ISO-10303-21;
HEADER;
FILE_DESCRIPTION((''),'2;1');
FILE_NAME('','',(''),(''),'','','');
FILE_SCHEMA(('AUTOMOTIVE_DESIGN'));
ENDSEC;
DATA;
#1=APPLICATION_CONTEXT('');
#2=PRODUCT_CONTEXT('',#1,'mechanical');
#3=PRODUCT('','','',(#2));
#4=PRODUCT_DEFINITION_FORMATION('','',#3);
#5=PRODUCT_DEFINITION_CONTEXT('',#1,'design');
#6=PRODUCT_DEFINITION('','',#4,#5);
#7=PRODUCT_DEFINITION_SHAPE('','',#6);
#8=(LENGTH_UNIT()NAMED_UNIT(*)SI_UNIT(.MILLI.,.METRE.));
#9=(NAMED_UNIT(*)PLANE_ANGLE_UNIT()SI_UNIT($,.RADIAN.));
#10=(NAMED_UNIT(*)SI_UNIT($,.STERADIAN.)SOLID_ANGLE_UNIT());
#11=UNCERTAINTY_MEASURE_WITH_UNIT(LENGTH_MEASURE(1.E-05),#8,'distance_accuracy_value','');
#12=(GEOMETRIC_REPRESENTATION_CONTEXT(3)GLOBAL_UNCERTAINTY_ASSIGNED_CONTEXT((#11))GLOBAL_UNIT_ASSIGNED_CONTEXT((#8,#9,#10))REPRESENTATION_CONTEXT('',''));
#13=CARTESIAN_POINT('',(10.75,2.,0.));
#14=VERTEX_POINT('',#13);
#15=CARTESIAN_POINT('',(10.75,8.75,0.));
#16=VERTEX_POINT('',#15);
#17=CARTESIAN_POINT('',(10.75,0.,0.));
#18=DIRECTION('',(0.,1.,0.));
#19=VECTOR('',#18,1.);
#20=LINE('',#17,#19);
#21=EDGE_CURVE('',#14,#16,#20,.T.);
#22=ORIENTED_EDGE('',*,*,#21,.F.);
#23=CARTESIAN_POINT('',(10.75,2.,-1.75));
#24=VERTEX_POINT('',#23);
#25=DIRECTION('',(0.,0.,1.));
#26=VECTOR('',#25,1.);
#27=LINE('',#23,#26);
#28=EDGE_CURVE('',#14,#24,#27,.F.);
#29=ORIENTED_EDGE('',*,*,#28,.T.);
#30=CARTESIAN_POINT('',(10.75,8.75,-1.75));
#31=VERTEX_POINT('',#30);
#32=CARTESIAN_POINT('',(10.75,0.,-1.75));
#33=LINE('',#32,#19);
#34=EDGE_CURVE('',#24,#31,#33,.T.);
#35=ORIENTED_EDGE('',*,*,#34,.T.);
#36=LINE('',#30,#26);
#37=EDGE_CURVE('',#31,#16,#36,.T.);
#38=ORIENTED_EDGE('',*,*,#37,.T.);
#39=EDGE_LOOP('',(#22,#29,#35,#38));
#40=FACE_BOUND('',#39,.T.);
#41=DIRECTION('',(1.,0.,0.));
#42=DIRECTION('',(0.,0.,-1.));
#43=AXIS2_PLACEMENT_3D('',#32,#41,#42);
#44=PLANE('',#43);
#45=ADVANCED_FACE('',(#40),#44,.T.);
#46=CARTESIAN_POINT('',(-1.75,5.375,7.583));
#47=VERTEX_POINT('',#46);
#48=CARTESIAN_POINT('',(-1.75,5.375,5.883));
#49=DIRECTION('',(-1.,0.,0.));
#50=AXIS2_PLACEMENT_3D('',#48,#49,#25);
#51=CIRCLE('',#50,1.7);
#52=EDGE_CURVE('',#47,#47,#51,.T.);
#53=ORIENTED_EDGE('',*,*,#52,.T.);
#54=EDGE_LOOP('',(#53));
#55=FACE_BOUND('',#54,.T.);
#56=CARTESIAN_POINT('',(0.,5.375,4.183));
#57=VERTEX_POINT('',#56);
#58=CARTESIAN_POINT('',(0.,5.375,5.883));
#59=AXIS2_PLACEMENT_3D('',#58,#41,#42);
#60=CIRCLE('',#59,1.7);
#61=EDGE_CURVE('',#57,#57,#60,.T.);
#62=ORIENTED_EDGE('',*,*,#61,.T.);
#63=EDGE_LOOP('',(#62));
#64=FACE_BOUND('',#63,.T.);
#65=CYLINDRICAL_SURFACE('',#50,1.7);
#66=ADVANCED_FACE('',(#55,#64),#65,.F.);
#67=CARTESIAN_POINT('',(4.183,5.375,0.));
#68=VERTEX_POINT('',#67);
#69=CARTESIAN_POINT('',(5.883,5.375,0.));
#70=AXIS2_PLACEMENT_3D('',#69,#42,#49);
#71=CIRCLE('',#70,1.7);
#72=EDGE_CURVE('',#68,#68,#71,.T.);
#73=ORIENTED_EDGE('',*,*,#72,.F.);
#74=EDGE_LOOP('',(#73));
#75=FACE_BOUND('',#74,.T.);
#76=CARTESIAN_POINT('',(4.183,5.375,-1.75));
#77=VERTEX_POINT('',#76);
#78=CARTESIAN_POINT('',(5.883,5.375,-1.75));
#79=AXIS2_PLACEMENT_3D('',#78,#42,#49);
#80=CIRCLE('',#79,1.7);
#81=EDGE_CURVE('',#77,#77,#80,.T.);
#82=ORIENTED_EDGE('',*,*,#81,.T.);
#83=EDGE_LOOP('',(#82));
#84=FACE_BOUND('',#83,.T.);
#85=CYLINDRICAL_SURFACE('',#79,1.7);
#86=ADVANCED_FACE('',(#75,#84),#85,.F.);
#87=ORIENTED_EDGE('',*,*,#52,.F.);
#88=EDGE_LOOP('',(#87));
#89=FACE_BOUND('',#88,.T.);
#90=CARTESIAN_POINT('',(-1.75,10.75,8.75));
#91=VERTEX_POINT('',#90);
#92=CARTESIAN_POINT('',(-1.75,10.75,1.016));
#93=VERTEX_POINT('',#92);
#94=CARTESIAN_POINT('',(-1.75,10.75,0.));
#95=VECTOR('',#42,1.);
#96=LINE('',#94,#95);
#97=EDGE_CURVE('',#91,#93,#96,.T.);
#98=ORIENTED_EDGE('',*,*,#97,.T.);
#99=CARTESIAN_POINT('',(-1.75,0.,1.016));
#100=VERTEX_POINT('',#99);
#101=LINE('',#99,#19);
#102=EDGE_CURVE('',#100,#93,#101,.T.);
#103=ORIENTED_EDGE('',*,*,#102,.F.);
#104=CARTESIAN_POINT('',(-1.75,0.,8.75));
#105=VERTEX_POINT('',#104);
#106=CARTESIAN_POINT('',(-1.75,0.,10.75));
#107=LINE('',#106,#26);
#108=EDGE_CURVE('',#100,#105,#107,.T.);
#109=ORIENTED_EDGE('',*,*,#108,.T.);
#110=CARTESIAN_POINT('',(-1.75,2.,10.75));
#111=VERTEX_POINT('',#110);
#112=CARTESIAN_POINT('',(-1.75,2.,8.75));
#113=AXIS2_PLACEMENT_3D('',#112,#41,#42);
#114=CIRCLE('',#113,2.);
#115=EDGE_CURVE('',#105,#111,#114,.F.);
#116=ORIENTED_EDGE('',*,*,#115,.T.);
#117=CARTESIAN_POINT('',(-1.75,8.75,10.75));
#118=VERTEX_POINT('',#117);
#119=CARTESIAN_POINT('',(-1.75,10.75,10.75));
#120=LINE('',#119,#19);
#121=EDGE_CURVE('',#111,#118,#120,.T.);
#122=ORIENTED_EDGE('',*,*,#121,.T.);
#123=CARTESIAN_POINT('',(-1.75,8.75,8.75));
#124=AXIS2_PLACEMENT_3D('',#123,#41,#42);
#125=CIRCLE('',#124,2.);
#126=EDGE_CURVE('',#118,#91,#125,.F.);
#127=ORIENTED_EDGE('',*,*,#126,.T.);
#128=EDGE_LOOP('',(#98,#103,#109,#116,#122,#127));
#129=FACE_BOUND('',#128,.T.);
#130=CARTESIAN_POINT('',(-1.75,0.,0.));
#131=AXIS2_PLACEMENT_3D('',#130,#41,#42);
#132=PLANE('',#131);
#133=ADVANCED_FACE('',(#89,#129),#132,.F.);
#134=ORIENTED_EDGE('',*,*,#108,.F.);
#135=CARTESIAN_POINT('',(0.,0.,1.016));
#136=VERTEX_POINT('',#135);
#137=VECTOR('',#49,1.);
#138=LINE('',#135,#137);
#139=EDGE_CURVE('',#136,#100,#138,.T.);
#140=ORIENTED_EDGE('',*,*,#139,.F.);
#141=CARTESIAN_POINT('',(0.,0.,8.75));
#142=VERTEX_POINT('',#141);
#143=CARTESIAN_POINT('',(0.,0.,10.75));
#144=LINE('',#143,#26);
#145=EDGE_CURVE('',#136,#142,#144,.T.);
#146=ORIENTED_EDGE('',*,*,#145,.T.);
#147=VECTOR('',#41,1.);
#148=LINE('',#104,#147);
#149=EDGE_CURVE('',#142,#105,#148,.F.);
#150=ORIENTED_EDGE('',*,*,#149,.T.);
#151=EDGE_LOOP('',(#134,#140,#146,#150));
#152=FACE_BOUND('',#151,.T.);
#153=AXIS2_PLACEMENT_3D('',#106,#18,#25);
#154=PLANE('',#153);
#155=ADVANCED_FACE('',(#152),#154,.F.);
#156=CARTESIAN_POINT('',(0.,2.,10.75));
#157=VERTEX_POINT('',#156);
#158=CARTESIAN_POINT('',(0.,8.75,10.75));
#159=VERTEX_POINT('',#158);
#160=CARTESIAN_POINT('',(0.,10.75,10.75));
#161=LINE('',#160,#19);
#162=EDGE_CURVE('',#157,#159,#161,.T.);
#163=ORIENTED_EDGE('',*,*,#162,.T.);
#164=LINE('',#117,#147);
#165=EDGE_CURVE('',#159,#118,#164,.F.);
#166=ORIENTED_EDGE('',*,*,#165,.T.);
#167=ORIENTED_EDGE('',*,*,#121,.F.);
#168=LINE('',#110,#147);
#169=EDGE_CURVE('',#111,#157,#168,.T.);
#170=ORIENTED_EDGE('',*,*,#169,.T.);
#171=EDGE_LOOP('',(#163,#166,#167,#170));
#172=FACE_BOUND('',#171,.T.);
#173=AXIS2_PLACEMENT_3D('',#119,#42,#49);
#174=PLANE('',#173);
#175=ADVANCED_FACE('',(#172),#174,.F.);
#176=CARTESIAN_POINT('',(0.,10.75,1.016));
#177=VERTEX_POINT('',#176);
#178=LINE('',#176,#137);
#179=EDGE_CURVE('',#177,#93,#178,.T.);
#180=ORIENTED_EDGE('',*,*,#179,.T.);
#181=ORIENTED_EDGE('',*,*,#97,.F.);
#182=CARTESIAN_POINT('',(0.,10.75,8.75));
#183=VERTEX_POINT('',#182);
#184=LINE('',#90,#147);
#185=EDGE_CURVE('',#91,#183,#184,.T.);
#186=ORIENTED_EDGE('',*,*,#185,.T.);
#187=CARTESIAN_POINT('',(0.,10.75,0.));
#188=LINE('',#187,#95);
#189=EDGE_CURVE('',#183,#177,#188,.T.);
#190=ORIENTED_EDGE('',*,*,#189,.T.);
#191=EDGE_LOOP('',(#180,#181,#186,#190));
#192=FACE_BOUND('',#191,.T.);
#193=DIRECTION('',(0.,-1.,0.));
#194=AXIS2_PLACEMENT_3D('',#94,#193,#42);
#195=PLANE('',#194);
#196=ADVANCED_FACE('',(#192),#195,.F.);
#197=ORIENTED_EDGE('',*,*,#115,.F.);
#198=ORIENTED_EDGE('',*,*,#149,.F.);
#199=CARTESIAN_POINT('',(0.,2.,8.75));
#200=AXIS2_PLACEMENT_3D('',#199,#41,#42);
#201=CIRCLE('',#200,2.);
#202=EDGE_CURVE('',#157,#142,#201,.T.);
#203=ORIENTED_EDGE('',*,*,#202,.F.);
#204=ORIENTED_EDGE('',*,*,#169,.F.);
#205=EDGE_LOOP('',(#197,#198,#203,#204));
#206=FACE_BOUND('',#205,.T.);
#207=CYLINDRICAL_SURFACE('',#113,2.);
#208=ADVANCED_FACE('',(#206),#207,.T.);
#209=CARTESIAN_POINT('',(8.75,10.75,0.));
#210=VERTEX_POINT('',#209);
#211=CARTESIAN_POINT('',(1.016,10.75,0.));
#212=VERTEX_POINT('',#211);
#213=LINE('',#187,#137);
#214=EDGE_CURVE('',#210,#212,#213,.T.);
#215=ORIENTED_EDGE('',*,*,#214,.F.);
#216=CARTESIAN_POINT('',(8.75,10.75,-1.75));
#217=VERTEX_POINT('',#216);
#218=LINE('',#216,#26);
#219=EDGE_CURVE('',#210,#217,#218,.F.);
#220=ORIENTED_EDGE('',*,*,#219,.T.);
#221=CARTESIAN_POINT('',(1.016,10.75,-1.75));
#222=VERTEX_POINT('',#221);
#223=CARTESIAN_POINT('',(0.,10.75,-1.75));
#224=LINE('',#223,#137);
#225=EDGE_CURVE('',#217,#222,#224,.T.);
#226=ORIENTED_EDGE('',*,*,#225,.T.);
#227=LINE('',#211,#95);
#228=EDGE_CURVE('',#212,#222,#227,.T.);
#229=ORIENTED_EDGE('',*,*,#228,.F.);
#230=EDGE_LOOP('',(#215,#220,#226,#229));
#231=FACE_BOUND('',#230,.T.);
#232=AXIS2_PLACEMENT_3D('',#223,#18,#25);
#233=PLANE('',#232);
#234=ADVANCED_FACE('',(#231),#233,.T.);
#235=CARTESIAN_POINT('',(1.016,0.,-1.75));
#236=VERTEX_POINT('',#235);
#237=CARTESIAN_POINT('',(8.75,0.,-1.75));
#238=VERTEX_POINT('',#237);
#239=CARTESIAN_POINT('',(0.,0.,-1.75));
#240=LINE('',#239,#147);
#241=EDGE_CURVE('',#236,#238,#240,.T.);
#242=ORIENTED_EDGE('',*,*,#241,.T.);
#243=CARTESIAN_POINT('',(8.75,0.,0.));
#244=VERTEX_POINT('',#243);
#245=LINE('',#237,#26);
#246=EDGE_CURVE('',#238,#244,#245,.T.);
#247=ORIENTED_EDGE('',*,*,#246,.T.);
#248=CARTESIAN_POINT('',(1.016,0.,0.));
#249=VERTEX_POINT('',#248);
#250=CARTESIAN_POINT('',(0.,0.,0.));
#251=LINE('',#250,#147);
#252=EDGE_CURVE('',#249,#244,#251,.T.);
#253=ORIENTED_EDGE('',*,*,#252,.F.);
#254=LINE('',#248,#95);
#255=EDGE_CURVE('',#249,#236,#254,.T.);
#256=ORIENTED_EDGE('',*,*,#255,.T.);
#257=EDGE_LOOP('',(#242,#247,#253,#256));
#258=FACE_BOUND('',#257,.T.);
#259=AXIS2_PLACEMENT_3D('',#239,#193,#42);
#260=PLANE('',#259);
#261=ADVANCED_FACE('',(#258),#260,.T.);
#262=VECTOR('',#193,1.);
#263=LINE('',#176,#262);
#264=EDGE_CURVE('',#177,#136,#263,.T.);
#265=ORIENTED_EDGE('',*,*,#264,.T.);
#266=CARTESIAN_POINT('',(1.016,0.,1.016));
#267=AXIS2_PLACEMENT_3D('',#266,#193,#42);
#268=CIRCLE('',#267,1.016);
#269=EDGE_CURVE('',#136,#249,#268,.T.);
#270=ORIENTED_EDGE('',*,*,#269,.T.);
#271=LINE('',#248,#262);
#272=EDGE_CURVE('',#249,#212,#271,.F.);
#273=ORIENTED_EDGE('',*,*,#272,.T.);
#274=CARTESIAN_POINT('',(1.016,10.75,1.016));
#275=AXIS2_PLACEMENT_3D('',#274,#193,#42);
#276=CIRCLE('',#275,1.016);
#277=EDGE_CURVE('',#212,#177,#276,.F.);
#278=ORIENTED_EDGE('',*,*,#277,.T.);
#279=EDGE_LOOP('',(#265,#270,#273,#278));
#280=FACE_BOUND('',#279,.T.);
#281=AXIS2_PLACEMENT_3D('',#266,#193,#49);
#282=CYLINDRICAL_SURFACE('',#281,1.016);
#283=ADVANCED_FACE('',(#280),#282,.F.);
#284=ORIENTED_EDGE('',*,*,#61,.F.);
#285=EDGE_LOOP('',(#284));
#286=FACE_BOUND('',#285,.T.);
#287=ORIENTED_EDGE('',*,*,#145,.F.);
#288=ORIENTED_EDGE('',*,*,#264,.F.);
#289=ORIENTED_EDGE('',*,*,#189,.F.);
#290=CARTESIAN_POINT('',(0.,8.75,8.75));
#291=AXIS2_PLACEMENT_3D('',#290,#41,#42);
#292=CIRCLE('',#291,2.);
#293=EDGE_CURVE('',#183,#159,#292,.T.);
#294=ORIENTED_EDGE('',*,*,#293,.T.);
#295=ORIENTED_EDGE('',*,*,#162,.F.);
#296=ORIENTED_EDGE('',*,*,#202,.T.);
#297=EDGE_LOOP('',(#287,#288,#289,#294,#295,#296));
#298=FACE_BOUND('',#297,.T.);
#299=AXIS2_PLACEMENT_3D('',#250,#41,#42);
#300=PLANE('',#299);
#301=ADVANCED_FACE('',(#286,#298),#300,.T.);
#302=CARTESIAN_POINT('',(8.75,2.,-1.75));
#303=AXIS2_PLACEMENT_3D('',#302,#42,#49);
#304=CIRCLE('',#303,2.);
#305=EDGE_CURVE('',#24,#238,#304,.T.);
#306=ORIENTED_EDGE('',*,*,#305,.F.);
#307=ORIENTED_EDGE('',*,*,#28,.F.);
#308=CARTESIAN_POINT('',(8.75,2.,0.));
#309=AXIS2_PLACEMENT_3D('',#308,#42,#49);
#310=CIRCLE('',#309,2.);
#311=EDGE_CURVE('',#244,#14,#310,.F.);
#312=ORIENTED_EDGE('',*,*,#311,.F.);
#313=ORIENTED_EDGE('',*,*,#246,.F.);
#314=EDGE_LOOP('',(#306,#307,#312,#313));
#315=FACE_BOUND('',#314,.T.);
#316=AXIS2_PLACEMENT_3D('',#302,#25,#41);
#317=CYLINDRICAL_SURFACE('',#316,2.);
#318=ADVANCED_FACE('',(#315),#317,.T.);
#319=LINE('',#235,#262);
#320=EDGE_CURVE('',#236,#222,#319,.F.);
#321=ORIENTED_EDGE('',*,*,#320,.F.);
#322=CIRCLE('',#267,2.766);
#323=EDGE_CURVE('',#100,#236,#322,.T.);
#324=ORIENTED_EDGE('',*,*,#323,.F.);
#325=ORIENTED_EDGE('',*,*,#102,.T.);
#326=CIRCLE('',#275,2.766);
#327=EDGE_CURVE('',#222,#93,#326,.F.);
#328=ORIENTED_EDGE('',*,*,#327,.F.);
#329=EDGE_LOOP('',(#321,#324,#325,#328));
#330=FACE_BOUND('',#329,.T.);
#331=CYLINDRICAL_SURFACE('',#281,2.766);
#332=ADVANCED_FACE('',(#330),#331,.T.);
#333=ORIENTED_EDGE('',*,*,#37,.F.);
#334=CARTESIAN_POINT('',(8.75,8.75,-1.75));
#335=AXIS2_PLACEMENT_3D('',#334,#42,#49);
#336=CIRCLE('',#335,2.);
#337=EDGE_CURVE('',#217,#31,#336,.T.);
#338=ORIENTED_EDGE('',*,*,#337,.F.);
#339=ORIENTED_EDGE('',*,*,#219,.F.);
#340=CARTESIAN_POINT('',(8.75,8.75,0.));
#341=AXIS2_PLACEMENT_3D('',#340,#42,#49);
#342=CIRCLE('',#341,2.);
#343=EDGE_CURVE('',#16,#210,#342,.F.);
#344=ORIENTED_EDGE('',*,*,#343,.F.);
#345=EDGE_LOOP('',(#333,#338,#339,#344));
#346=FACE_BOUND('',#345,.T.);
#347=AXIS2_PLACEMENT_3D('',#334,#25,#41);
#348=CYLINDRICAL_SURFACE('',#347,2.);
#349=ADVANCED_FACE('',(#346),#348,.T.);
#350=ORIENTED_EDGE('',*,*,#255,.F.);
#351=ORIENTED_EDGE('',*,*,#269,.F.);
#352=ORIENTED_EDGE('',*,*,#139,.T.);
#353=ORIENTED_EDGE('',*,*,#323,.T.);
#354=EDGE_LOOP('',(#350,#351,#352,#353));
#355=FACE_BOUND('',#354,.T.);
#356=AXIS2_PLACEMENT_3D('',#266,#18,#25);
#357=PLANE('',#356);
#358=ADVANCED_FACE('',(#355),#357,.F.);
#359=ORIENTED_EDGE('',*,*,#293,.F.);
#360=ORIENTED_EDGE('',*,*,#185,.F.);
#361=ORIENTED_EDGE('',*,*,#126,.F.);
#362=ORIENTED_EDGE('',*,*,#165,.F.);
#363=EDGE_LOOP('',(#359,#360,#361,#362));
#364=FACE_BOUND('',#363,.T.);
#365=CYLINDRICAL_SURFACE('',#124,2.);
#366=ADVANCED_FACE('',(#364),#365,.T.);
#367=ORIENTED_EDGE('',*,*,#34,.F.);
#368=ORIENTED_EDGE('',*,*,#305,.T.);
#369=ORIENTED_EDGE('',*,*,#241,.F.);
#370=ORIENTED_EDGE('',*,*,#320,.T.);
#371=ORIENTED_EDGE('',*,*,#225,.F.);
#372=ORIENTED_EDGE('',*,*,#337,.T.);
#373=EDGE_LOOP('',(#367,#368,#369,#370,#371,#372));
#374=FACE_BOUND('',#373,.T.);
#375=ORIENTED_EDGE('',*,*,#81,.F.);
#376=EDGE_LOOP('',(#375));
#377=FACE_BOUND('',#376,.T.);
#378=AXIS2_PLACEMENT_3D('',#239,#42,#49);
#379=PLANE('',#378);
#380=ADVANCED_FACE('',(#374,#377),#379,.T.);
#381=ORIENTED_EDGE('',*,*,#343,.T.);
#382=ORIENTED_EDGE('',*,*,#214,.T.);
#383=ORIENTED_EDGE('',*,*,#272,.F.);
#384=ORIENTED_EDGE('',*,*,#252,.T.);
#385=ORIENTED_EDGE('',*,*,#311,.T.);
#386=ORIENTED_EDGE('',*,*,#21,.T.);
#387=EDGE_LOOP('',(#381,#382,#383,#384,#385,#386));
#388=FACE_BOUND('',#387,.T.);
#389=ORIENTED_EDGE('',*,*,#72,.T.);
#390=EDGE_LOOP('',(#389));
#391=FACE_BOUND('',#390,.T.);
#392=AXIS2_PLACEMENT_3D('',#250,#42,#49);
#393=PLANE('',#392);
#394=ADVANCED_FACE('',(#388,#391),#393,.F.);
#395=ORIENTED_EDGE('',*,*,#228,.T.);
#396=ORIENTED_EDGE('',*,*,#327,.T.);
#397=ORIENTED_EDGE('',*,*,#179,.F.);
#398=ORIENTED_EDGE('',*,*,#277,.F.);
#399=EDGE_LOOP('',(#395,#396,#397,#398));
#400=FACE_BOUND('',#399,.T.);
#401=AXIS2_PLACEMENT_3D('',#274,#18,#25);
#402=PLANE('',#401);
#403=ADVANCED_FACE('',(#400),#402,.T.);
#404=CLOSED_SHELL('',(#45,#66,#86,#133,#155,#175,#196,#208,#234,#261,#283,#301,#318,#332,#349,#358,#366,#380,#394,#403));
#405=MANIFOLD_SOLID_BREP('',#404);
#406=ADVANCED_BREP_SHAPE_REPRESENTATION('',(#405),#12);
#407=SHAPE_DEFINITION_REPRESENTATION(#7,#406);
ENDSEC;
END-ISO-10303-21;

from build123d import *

# Parameters (mm, degrees)
SKETCH1_W                      = 10.75
SKETCH1_H                      = 10.75
BASE_FLANGE1_DEPTH             = 1.75
EDGE_FLANGE1_STRIP_W           = 9.032
EDGE_FLANGE1_STRIP_H           = 1.75
EDGE_FLANGE1_STRIP_CUT_DEPTH   = 10.75
EDGE_FLANGE1_DEPTH             = 10.75
M3_CLEARANCE_HOLE1_D           = 3.4
M3_CLEARANCE_HOLE1_ON_FACE_2_D = 3.4
FILLET1_R                      = 2


# Sheet-metal steps are written as plain solids
with BuildPart() as part:
    # Sketch1 → Base-Flange1 (new body)
    with BuildSketch(Plane.XY):
        with Locations((5.375, 5.375)):
            Rectangle(SKETCH1_W, SKETCH1_H)
    extrude(amount=-BASE_FLANGE1_DEPTH)

    # Edge-Flange1 strip (across the edge) → Edge-Flange1 strip cut (cut)
    with BuildSketch(Plane.XZ.offset(-10.75)):
        with Locations((-3.5, -0.875)):
            Rectangle(EDGE_FLANGE1_STRIP_W, EDGE_FLANGE1_STRIP_H)
    extrude(amount=EDGE_FLANGE1_STRIP_CUT_DEPTH, mode=Mode.SUBTRACT)

    # Edge-Flange1 section (across the edge) → Edge-Flange1 (add)
    with BuildSketch(Plane.XZ.offset(-10.75)):
        with BuildLine():
            Line((-1.75, 1.016), (-1.75, 10.75))
            Line((-1.75, 10.75), (0, 10.75))
            Line((0, 10.75), (0, 1.016))
            ThreePointArc((0, 1.016), (0.29757951, 0.29757951), (1.016, 0))
            Line((1.016, 0), (1.016, -1.75))
            ThreePointArc((1.016, -1.75), (-0.939857357, -0.939857357), (-1.75, 1.016))
        make_face()
    extrude(amount=EDGE_FLANGE1_DEPTH)

    # M3 Clearance Hole1 (through all)
    with Locations(Plane(origin=(5.883, 5.375, -1.75), x_dir=(-1, 0, 0), z_dir=(0, 0, -1))):
        with Locations((0, 0)):
            Hole(M3_CLEARANCE_HOLE1_D / 2)

    # M3 Clearance Hole1 on face 2 (through all)
    with Locations(Plane(origin=(-1.75, 5.375, 5.883), x_dir=(0, 0, -1), z_dir=(-1, 0, 0))):
        with Locations((0, 0)):
            Hole(M3_CLEARANCE_HOLE1_ON_FACE_2_D / 2)

    # Fillet1
    fillet1_edges = [part.edges().sort_by_distance(p)[0] for p in [
        (-0.875, 10.75, 10.75),
        (-0.875, 0, 10.75),
        (10.75, 10.75, -0.875),
        (10.75, 0, -0.875),
    ]]
    fillet(fillet1_edges, radius=FILLET1_R)


solid = part.part
